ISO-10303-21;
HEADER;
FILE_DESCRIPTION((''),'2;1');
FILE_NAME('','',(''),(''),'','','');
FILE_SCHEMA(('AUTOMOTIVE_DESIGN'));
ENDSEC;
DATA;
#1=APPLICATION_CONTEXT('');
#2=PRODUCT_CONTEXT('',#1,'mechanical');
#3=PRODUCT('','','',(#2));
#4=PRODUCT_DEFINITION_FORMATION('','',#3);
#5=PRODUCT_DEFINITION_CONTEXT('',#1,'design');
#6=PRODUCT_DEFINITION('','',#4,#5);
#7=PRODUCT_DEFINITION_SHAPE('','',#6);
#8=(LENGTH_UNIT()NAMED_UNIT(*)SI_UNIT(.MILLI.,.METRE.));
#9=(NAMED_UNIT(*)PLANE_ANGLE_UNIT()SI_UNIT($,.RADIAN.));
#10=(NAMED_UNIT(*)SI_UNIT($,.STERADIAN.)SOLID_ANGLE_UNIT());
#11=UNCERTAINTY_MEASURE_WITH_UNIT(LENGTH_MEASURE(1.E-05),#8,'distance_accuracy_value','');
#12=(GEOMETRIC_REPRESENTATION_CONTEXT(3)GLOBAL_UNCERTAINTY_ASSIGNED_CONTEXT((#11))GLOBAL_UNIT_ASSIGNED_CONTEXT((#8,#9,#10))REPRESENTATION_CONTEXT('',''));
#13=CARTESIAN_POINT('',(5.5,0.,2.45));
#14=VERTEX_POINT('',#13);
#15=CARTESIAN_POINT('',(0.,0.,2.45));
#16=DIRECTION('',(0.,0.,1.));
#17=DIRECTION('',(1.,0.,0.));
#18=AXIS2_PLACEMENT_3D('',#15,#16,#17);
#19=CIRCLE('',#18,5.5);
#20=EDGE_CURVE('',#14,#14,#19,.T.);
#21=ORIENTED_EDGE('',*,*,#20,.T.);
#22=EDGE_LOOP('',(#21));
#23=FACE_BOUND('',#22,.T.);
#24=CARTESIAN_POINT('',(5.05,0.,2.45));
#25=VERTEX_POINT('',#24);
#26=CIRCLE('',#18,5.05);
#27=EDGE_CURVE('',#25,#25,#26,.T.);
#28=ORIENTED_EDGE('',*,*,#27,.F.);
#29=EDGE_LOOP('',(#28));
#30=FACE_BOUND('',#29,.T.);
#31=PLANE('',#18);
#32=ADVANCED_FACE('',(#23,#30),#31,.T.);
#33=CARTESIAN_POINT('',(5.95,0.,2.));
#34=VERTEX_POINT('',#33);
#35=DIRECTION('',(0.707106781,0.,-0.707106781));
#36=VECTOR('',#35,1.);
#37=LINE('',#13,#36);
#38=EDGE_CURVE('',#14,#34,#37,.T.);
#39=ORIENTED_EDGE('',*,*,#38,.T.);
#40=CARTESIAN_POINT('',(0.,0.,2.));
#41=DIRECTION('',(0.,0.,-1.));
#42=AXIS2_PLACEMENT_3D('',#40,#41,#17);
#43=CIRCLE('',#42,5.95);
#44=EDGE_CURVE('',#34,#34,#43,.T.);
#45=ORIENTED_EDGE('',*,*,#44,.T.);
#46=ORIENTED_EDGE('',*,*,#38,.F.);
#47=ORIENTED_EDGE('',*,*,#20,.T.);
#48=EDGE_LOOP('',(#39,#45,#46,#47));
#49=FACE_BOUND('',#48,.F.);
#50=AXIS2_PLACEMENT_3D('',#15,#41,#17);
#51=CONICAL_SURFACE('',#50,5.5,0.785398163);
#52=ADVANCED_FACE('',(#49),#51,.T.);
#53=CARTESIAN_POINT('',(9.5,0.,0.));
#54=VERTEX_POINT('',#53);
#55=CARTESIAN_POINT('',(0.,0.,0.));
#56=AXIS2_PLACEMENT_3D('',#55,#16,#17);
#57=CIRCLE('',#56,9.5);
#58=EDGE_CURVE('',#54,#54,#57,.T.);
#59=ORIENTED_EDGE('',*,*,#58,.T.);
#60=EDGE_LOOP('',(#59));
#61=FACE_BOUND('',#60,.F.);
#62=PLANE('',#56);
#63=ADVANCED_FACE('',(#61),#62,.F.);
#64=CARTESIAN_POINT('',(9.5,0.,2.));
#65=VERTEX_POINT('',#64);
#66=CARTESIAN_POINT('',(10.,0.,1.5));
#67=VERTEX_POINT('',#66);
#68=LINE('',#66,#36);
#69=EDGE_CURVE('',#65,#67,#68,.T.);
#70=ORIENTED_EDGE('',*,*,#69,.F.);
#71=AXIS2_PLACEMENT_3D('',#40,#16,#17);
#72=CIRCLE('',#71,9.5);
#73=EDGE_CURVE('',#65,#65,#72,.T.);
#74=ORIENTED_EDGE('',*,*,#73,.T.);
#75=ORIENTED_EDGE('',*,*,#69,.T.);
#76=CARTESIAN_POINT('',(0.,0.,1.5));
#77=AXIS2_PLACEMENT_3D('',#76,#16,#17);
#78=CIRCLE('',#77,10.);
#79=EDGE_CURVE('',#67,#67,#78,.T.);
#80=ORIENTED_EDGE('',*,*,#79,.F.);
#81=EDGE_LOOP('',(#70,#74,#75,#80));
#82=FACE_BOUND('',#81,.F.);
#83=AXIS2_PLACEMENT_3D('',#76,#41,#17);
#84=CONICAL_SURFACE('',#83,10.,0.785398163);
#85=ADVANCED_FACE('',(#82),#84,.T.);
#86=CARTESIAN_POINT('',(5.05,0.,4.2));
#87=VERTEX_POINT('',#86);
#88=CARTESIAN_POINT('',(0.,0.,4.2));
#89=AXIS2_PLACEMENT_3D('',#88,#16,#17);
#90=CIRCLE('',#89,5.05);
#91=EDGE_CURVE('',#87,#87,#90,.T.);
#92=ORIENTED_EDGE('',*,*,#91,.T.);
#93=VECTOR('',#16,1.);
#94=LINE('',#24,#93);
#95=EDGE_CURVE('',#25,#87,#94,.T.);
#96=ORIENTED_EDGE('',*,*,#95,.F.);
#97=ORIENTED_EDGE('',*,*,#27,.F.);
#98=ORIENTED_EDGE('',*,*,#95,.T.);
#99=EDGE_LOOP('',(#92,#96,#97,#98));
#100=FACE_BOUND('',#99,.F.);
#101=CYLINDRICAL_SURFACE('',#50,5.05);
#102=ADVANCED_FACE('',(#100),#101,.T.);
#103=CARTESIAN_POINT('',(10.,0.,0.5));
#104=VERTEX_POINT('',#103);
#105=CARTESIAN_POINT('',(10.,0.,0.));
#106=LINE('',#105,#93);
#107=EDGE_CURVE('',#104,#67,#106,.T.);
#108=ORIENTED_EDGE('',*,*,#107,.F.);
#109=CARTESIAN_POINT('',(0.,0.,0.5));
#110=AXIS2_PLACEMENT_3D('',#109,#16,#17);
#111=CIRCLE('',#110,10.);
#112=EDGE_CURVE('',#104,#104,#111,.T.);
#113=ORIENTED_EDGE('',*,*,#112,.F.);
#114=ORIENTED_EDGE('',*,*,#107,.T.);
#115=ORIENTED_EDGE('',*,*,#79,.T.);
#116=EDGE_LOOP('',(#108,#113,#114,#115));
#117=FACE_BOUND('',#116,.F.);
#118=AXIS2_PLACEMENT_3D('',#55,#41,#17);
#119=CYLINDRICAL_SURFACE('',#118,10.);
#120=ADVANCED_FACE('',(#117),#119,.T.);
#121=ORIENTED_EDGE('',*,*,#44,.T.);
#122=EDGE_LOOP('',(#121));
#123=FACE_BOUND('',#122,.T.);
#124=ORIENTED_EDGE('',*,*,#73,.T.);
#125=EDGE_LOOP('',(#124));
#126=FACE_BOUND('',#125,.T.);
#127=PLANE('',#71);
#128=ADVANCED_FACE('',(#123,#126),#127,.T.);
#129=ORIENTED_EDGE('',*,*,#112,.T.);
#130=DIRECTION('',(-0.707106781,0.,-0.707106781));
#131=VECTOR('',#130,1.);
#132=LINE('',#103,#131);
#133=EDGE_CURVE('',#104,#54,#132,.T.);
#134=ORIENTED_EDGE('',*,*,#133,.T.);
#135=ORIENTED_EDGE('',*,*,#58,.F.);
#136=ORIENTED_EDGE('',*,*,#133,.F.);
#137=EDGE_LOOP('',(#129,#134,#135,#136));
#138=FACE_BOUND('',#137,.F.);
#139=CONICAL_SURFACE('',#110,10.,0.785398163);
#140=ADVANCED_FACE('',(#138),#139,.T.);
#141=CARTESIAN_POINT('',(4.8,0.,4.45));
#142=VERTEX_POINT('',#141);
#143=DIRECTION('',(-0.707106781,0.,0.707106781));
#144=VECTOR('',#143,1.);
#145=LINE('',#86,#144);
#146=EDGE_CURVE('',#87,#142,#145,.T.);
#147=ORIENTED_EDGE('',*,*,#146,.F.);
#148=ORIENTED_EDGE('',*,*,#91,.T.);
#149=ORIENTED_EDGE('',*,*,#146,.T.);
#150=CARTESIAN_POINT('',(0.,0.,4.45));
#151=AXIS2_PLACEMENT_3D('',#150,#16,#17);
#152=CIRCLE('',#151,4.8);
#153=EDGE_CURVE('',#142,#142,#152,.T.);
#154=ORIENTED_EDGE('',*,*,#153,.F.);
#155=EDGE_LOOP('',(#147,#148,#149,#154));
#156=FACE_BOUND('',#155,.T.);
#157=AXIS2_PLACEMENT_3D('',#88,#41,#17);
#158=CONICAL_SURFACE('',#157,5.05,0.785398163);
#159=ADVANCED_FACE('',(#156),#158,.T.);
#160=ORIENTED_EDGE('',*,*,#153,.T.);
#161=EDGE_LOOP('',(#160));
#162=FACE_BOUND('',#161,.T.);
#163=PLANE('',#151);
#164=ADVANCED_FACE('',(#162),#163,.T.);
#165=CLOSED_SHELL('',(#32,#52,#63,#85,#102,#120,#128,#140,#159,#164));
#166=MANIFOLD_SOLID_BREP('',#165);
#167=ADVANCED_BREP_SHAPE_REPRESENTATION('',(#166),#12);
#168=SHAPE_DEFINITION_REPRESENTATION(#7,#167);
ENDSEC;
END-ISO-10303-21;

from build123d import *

# Parameters (mm, degrees)
F0_R     = 10
F1_DEPTH = 2
F2_R     = 6
F3_DEPTH = 0.45
F4_R     = 5.05
F5_DEPTH = 2
F6_SIZE  = 0.25
F8_SIZE  = 0.5


# Not quite as in the source:
# - a fillet or chamfer that OpenCascade refuses, or shapes differently, is made with other operations: its cross-section is extruded or revolved along the edge and cut away or added


with BuildPart() as f1:
    # F0 (on Top) → F1 (new body)
    with BuildSketch(Plane.XY):
        Circle(F0_R)
    extrude(amount=F1_DEPTH)

    # F2 (on face) → F3 (join)
    with BuildSketch(Plane.XY.offset(2)):
        Circle(F2_R)
    extrude(amount=F3_DEPTH)

    # F4 (on face) → F5 (join)
    with BuildSketch(Plane.XY.offset(2.45)):
        Circle(F4_R)
    extrude(amount=F5_DEPTH)

    # F6
    f6_edges = [f1.edges().sort_by_distance(p)[0] for p in [
        (-5.05, 0, 4.45),
    ]]
    chamfer(f6_edges, length=F6_SIZE)

    # F7: chamfer of 0.5 on 1 edges, made by hand


with BuildPart() as f7_tool2:
    # F7_s3 → F7_t4 (revolve)
    with BuildSketch(Plane.XZ):
        Polygon((5.5, 2.45), (6, 1.95), (6, 2.45), align=None)
    revolve(axis=Axis((0, 0, 2.45), (0, 0, 1)))

    split(bisect_by=Plane.XY.offset(2), keep=Keep.TOP)


with BuildPart() as f1_1:
    add(f1.part)

    # F7_t1: cut F7_tool2
    add(f7_tool2.part, mode=Mode.SUBTRACT)

    # F8
    f8_edges = [f1_1.edges().sort_by_distance(p)[0] for p in [
        (-10, 0, 0),
        (-10, 0, 2),
    ]]
    chamfer(f8_edges, length=F8_SIZE)


solid = f1_1.part
